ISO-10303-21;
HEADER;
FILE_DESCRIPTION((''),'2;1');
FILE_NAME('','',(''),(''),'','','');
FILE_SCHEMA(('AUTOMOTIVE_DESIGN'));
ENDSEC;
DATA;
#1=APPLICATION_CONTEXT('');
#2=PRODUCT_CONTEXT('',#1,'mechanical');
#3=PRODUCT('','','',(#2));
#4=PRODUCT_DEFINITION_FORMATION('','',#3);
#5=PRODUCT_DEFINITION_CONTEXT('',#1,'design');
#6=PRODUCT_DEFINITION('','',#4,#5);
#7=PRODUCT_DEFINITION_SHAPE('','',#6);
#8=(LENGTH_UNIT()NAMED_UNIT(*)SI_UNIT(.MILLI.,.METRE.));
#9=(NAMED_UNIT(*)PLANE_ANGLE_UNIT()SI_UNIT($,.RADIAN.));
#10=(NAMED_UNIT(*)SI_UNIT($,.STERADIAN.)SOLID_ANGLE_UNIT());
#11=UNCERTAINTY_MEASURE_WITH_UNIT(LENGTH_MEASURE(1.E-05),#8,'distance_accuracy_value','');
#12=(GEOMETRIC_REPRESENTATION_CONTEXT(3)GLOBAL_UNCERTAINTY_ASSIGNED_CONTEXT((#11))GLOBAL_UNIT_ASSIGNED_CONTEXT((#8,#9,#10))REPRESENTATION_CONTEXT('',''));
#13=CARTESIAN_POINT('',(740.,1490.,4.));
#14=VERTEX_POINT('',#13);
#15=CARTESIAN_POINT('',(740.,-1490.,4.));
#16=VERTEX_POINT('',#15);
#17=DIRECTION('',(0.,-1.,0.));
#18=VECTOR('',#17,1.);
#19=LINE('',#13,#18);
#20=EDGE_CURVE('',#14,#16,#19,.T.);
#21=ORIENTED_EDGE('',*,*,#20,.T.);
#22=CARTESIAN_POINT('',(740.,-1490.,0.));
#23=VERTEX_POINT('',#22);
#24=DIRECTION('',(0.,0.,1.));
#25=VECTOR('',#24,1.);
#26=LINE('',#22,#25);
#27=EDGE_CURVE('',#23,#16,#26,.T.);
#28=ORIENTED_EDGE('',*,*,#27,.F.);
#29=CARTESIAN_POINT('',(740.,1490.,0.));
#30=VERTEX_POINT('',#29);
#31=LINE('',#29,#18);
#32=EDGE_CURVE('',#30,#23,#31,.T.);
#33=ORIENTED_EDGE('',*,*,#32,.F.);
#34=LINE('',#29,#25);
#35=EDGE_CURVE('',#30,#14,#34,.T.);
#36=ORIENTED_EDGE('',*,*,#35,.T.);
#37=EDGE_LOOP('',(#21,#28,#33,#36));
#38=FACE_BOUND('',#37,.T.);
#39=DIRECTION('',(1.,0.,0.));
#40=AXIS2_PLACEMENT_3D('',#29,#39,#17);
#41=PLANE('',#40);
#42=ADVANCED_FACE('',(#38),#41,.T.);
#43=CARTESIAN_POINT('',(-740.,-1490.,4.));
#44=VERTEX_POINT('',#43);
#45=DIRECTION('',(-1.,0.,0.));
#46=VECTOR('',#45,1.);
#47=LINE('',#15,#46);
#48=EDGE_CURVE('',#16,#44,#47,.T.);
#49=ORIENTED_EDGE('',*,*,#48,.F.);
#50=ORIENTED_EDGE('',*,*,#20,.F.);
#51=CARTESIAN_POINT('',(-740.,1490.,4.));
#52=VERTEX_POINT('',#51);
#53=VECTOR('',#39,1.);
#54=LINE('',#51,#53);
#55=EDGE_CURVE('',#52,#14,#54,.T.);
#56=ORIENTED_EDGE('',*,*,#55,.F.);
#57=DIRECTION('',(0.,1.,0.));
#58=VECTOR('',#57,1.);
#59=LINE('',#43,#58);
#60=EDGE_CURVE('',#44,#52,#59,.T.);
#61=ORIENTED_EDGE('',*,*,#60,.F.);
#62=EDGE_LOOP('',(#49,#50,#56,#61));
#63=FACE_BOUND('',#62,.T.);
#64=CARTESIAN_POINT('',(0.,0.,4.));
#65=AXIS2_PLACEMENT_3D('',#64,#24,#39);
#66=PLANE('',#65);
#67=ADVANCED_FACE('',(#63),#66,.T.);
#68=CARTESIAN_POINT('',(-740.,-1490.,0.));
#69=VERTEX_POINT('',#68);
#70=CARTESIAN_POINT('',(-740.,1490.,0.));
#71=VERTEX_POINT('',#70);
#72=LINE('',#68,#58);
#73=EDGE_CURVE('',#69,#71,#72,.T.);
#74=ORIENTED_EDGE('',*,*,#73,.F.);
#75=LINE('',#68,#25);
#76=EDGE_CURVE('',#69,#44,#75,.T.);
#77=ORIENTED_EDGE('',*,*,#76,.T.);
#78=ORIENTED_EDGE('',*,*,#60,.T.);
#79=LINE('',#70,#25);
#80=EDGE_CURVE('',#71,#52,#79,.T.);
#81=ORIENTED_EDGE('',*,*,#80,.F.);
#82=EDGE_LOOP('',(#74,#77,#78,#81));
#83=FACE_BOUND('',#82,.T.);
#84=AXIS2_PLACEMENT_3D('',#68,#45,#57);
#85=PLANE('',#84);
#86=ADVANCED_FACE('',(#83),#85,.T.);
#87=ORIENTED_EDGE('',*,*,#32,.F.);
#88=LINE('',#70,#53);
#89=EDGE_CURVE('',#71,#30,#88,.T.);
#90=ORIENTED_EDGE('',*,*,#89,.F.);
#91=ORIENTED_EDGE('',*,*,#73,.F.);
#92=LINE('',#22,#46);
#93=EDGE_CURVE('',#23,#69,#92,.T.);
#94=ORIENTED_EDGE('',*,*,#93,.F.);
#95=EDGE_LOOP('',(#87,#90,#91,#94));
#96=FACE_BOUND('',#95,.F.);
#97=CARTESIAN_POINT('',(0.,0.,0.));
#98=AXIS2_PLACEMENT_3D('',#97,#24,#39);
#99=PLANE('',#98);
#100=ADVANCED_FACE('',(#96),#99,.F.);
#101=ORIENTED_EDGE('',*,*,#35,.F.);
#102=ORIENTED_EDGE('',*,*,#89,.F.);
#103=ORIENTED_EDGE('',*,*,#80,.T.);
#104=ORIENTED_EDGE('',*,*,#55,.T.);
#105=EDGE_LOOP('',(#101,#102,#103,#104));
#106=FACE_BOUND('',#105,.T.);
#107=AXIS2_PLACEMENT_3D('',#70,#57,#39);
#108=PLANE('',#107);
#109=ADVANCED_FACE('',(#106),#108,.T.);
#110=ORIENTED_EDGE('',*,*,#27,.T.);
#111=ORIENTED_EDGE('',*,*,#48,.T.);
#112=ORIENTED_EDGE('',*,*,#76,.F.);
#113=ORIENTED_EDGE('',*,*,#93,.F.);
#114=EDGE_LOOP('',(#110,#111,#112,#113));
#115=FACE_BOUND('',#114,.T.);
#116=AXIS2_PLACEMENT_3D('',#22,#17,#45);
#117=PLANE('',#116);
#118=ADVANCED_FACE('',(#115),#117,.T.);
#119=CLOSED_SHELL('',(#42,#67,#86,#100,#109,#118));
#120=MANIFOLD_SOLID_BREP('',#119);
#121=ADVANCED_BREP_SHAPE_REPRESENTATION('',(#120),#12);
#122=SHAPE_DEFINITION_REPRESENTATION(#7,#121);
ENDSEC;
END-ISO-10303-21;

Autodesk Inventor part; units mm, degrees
ref_plane "YZ Plane" through (0, 0, 0) normal (1, 0, 0) x (0, 1, 0)
ref_plane "XZ Plane" through (0, 0, 0) normal (0, 1, 0) x (-1, 0, 0)
ref_plane "XY Plane" through (0, 0, 0) normal (0, 0, 1) x (1, 0, 0)
sketch "Sketch1" plane through (0, 0, 0) normal (0, 0, 1) x (1, 0, 0)
  line L0 (740, -1490) -> (-740, -1490)
  line L1 (-740, -1490) -> (-740, 1490)
  line L2 (-740, 1490) -> (740, 1490)
  line L3 (740, 1490) -> (740, -1490)
  line L4 (740, -1490) -> (-740, 1490) construction
  line L5 (-740, -1490) -> (740, 1490) construction
  point P0 (0, 0)
  dimension "d0" = 1480
  dimension "d1" = 2980
extrude "Plate1" add sketch "Sketch1" along normal blind 4
sketch "Эскиз2" plane through (0, 0, 4) normal (0, 0, 1) x (1, 0, 0)
  line L0 (544.4253, -1295.3771) -> (544.4253, -1793.5133) construction
  line L1 (544.4253, -1793.5133) -> (504.798, -1793.5133) construction
  line L2 (504.798, -1793.5133) -> (504.798, -1295.3771) construction
  line L3 (504.798, -1295.3771) -> (544.4253, -1295.3771) construction
  line L4 (210.5058, -1238) -> (210.5058, -1335) projected
  line L5 (210.5058, -1335) -> (206.5068, -1335) projected
  line L6 (-289.6228, -1238) -> (-289.6228, -1335) projected
  line L7 (-289.6228, -1335) -> (-293.6218, -1335) projected
  line L8 (-739.3197, -1234.5) -> (-710, -1234.5) projected
  line L9 (-710, -1234.5) -> (-710, -1230.5) projected
  line L10 (-739.3197, -737.8333) -> (-710, -737.8333) projected
  line L11 (-710, -737.8333) -> (-710, -733.8333) projected
  line L12 (-739.3197, -241.1667) -> (-710, -241.1667) projected
  line L13 (-710, -241.1667) -> (-710, -237.1667) projected
  line L14 (-739.3197, 255.5) -> (-710, 255.5) projected
  line L15 (-710, 255.5) -> (-710, 259.5) projected
  line L16 (-739.3197, 752.1667) -> (-710, 752.1667) projected
  line L17 (-710, 752.1667) -> (-710, 756.1667) projected
  line L18 (-739.3197, 1248.8333) -> (-710, 1248.8333) projected
  line L19 (-710, 1248.8333) -> (-710, 1252.8333) projected
  ellipse E0 centre (-289.6228, 1490.5) end of major axis (-289.6228, 1520.5) minor radius 0.6803 (-289.6228, 1460.5) -> (-289.6228, 1520.5) ccw projected
  line L20 (-289.6228, 1460.5) -> (-293.6218, 1460.5) projected
  ellipse E1 centre (210.5058, 1490.5) end of major axis (210.5058, 1520.5) minor radius 0.6803 (210.5058, 1460.5) -> (210.5058, 1520.5) ccw projected
  line L21 (210.5058, 1460.5) -> (206.5068, 1460.5) projected
  line L22 (710, -1234.5) -> (710, -1230.5) projected
  line L23 (710, -737.8333) -> (710, -733.8333) projected
  line L24 (710, -241.1667) -> (710, -237.1667) projected
  line L25 (710, 255.5) -> (710, 259.5) projected
  line L26 (710, 752.1667) -> (710, 756.1667) projected
  line L27 (710, 1248.8333) -> (710, 1252.8333) projected
  line L28 (710, -1234.5) -> (680, -1234.5)
  line L29 (710, -737.8333) -> (680, -737.8333)
  line L30 (710, -241.1667) -> (680, -241.1667)
  line L31 (710, 255.5) -> (680, 255.5)
  line L32 (710, 752.1667) -> (680, 752.1667)
  line L33 (710, 1248.8333) -> (680, 1248.8333)
  point P0 (0, 0)
  dimension "d9" = 30
  dimension "d10" = 30
  dimension "d11" = 30
  dimension "d12" = 30
  dimension "d13" = 30
  dimension "d14" = 30
mark "Маркировка1"
equation "\"d0\" = Лист_ширина"
equation "\"d2\" = Thickness"
equation "\"BendRadius\" = Thickness"
equation "\"BendReliefWidth\" = Thickness"
equation "\"BendReliefDepth\" = 0.5 * Thickness"
equation "\"CornerReliefSize\" = 4 * Thickness"
equation "\"MinimumRemnant\" = 2 * Thickness"
equation "\"TransitionRadius\" = BendRadius"
equation "\"JacobiRadiusSize\" = BendRadius"
equation "\"GapSize\" = Thickness"
equation "\"Лист_ширина\" = 1480"
equation "\"Thickness\" = 4"
properties part number "GBK 2321 shield 8" material "Steel"
